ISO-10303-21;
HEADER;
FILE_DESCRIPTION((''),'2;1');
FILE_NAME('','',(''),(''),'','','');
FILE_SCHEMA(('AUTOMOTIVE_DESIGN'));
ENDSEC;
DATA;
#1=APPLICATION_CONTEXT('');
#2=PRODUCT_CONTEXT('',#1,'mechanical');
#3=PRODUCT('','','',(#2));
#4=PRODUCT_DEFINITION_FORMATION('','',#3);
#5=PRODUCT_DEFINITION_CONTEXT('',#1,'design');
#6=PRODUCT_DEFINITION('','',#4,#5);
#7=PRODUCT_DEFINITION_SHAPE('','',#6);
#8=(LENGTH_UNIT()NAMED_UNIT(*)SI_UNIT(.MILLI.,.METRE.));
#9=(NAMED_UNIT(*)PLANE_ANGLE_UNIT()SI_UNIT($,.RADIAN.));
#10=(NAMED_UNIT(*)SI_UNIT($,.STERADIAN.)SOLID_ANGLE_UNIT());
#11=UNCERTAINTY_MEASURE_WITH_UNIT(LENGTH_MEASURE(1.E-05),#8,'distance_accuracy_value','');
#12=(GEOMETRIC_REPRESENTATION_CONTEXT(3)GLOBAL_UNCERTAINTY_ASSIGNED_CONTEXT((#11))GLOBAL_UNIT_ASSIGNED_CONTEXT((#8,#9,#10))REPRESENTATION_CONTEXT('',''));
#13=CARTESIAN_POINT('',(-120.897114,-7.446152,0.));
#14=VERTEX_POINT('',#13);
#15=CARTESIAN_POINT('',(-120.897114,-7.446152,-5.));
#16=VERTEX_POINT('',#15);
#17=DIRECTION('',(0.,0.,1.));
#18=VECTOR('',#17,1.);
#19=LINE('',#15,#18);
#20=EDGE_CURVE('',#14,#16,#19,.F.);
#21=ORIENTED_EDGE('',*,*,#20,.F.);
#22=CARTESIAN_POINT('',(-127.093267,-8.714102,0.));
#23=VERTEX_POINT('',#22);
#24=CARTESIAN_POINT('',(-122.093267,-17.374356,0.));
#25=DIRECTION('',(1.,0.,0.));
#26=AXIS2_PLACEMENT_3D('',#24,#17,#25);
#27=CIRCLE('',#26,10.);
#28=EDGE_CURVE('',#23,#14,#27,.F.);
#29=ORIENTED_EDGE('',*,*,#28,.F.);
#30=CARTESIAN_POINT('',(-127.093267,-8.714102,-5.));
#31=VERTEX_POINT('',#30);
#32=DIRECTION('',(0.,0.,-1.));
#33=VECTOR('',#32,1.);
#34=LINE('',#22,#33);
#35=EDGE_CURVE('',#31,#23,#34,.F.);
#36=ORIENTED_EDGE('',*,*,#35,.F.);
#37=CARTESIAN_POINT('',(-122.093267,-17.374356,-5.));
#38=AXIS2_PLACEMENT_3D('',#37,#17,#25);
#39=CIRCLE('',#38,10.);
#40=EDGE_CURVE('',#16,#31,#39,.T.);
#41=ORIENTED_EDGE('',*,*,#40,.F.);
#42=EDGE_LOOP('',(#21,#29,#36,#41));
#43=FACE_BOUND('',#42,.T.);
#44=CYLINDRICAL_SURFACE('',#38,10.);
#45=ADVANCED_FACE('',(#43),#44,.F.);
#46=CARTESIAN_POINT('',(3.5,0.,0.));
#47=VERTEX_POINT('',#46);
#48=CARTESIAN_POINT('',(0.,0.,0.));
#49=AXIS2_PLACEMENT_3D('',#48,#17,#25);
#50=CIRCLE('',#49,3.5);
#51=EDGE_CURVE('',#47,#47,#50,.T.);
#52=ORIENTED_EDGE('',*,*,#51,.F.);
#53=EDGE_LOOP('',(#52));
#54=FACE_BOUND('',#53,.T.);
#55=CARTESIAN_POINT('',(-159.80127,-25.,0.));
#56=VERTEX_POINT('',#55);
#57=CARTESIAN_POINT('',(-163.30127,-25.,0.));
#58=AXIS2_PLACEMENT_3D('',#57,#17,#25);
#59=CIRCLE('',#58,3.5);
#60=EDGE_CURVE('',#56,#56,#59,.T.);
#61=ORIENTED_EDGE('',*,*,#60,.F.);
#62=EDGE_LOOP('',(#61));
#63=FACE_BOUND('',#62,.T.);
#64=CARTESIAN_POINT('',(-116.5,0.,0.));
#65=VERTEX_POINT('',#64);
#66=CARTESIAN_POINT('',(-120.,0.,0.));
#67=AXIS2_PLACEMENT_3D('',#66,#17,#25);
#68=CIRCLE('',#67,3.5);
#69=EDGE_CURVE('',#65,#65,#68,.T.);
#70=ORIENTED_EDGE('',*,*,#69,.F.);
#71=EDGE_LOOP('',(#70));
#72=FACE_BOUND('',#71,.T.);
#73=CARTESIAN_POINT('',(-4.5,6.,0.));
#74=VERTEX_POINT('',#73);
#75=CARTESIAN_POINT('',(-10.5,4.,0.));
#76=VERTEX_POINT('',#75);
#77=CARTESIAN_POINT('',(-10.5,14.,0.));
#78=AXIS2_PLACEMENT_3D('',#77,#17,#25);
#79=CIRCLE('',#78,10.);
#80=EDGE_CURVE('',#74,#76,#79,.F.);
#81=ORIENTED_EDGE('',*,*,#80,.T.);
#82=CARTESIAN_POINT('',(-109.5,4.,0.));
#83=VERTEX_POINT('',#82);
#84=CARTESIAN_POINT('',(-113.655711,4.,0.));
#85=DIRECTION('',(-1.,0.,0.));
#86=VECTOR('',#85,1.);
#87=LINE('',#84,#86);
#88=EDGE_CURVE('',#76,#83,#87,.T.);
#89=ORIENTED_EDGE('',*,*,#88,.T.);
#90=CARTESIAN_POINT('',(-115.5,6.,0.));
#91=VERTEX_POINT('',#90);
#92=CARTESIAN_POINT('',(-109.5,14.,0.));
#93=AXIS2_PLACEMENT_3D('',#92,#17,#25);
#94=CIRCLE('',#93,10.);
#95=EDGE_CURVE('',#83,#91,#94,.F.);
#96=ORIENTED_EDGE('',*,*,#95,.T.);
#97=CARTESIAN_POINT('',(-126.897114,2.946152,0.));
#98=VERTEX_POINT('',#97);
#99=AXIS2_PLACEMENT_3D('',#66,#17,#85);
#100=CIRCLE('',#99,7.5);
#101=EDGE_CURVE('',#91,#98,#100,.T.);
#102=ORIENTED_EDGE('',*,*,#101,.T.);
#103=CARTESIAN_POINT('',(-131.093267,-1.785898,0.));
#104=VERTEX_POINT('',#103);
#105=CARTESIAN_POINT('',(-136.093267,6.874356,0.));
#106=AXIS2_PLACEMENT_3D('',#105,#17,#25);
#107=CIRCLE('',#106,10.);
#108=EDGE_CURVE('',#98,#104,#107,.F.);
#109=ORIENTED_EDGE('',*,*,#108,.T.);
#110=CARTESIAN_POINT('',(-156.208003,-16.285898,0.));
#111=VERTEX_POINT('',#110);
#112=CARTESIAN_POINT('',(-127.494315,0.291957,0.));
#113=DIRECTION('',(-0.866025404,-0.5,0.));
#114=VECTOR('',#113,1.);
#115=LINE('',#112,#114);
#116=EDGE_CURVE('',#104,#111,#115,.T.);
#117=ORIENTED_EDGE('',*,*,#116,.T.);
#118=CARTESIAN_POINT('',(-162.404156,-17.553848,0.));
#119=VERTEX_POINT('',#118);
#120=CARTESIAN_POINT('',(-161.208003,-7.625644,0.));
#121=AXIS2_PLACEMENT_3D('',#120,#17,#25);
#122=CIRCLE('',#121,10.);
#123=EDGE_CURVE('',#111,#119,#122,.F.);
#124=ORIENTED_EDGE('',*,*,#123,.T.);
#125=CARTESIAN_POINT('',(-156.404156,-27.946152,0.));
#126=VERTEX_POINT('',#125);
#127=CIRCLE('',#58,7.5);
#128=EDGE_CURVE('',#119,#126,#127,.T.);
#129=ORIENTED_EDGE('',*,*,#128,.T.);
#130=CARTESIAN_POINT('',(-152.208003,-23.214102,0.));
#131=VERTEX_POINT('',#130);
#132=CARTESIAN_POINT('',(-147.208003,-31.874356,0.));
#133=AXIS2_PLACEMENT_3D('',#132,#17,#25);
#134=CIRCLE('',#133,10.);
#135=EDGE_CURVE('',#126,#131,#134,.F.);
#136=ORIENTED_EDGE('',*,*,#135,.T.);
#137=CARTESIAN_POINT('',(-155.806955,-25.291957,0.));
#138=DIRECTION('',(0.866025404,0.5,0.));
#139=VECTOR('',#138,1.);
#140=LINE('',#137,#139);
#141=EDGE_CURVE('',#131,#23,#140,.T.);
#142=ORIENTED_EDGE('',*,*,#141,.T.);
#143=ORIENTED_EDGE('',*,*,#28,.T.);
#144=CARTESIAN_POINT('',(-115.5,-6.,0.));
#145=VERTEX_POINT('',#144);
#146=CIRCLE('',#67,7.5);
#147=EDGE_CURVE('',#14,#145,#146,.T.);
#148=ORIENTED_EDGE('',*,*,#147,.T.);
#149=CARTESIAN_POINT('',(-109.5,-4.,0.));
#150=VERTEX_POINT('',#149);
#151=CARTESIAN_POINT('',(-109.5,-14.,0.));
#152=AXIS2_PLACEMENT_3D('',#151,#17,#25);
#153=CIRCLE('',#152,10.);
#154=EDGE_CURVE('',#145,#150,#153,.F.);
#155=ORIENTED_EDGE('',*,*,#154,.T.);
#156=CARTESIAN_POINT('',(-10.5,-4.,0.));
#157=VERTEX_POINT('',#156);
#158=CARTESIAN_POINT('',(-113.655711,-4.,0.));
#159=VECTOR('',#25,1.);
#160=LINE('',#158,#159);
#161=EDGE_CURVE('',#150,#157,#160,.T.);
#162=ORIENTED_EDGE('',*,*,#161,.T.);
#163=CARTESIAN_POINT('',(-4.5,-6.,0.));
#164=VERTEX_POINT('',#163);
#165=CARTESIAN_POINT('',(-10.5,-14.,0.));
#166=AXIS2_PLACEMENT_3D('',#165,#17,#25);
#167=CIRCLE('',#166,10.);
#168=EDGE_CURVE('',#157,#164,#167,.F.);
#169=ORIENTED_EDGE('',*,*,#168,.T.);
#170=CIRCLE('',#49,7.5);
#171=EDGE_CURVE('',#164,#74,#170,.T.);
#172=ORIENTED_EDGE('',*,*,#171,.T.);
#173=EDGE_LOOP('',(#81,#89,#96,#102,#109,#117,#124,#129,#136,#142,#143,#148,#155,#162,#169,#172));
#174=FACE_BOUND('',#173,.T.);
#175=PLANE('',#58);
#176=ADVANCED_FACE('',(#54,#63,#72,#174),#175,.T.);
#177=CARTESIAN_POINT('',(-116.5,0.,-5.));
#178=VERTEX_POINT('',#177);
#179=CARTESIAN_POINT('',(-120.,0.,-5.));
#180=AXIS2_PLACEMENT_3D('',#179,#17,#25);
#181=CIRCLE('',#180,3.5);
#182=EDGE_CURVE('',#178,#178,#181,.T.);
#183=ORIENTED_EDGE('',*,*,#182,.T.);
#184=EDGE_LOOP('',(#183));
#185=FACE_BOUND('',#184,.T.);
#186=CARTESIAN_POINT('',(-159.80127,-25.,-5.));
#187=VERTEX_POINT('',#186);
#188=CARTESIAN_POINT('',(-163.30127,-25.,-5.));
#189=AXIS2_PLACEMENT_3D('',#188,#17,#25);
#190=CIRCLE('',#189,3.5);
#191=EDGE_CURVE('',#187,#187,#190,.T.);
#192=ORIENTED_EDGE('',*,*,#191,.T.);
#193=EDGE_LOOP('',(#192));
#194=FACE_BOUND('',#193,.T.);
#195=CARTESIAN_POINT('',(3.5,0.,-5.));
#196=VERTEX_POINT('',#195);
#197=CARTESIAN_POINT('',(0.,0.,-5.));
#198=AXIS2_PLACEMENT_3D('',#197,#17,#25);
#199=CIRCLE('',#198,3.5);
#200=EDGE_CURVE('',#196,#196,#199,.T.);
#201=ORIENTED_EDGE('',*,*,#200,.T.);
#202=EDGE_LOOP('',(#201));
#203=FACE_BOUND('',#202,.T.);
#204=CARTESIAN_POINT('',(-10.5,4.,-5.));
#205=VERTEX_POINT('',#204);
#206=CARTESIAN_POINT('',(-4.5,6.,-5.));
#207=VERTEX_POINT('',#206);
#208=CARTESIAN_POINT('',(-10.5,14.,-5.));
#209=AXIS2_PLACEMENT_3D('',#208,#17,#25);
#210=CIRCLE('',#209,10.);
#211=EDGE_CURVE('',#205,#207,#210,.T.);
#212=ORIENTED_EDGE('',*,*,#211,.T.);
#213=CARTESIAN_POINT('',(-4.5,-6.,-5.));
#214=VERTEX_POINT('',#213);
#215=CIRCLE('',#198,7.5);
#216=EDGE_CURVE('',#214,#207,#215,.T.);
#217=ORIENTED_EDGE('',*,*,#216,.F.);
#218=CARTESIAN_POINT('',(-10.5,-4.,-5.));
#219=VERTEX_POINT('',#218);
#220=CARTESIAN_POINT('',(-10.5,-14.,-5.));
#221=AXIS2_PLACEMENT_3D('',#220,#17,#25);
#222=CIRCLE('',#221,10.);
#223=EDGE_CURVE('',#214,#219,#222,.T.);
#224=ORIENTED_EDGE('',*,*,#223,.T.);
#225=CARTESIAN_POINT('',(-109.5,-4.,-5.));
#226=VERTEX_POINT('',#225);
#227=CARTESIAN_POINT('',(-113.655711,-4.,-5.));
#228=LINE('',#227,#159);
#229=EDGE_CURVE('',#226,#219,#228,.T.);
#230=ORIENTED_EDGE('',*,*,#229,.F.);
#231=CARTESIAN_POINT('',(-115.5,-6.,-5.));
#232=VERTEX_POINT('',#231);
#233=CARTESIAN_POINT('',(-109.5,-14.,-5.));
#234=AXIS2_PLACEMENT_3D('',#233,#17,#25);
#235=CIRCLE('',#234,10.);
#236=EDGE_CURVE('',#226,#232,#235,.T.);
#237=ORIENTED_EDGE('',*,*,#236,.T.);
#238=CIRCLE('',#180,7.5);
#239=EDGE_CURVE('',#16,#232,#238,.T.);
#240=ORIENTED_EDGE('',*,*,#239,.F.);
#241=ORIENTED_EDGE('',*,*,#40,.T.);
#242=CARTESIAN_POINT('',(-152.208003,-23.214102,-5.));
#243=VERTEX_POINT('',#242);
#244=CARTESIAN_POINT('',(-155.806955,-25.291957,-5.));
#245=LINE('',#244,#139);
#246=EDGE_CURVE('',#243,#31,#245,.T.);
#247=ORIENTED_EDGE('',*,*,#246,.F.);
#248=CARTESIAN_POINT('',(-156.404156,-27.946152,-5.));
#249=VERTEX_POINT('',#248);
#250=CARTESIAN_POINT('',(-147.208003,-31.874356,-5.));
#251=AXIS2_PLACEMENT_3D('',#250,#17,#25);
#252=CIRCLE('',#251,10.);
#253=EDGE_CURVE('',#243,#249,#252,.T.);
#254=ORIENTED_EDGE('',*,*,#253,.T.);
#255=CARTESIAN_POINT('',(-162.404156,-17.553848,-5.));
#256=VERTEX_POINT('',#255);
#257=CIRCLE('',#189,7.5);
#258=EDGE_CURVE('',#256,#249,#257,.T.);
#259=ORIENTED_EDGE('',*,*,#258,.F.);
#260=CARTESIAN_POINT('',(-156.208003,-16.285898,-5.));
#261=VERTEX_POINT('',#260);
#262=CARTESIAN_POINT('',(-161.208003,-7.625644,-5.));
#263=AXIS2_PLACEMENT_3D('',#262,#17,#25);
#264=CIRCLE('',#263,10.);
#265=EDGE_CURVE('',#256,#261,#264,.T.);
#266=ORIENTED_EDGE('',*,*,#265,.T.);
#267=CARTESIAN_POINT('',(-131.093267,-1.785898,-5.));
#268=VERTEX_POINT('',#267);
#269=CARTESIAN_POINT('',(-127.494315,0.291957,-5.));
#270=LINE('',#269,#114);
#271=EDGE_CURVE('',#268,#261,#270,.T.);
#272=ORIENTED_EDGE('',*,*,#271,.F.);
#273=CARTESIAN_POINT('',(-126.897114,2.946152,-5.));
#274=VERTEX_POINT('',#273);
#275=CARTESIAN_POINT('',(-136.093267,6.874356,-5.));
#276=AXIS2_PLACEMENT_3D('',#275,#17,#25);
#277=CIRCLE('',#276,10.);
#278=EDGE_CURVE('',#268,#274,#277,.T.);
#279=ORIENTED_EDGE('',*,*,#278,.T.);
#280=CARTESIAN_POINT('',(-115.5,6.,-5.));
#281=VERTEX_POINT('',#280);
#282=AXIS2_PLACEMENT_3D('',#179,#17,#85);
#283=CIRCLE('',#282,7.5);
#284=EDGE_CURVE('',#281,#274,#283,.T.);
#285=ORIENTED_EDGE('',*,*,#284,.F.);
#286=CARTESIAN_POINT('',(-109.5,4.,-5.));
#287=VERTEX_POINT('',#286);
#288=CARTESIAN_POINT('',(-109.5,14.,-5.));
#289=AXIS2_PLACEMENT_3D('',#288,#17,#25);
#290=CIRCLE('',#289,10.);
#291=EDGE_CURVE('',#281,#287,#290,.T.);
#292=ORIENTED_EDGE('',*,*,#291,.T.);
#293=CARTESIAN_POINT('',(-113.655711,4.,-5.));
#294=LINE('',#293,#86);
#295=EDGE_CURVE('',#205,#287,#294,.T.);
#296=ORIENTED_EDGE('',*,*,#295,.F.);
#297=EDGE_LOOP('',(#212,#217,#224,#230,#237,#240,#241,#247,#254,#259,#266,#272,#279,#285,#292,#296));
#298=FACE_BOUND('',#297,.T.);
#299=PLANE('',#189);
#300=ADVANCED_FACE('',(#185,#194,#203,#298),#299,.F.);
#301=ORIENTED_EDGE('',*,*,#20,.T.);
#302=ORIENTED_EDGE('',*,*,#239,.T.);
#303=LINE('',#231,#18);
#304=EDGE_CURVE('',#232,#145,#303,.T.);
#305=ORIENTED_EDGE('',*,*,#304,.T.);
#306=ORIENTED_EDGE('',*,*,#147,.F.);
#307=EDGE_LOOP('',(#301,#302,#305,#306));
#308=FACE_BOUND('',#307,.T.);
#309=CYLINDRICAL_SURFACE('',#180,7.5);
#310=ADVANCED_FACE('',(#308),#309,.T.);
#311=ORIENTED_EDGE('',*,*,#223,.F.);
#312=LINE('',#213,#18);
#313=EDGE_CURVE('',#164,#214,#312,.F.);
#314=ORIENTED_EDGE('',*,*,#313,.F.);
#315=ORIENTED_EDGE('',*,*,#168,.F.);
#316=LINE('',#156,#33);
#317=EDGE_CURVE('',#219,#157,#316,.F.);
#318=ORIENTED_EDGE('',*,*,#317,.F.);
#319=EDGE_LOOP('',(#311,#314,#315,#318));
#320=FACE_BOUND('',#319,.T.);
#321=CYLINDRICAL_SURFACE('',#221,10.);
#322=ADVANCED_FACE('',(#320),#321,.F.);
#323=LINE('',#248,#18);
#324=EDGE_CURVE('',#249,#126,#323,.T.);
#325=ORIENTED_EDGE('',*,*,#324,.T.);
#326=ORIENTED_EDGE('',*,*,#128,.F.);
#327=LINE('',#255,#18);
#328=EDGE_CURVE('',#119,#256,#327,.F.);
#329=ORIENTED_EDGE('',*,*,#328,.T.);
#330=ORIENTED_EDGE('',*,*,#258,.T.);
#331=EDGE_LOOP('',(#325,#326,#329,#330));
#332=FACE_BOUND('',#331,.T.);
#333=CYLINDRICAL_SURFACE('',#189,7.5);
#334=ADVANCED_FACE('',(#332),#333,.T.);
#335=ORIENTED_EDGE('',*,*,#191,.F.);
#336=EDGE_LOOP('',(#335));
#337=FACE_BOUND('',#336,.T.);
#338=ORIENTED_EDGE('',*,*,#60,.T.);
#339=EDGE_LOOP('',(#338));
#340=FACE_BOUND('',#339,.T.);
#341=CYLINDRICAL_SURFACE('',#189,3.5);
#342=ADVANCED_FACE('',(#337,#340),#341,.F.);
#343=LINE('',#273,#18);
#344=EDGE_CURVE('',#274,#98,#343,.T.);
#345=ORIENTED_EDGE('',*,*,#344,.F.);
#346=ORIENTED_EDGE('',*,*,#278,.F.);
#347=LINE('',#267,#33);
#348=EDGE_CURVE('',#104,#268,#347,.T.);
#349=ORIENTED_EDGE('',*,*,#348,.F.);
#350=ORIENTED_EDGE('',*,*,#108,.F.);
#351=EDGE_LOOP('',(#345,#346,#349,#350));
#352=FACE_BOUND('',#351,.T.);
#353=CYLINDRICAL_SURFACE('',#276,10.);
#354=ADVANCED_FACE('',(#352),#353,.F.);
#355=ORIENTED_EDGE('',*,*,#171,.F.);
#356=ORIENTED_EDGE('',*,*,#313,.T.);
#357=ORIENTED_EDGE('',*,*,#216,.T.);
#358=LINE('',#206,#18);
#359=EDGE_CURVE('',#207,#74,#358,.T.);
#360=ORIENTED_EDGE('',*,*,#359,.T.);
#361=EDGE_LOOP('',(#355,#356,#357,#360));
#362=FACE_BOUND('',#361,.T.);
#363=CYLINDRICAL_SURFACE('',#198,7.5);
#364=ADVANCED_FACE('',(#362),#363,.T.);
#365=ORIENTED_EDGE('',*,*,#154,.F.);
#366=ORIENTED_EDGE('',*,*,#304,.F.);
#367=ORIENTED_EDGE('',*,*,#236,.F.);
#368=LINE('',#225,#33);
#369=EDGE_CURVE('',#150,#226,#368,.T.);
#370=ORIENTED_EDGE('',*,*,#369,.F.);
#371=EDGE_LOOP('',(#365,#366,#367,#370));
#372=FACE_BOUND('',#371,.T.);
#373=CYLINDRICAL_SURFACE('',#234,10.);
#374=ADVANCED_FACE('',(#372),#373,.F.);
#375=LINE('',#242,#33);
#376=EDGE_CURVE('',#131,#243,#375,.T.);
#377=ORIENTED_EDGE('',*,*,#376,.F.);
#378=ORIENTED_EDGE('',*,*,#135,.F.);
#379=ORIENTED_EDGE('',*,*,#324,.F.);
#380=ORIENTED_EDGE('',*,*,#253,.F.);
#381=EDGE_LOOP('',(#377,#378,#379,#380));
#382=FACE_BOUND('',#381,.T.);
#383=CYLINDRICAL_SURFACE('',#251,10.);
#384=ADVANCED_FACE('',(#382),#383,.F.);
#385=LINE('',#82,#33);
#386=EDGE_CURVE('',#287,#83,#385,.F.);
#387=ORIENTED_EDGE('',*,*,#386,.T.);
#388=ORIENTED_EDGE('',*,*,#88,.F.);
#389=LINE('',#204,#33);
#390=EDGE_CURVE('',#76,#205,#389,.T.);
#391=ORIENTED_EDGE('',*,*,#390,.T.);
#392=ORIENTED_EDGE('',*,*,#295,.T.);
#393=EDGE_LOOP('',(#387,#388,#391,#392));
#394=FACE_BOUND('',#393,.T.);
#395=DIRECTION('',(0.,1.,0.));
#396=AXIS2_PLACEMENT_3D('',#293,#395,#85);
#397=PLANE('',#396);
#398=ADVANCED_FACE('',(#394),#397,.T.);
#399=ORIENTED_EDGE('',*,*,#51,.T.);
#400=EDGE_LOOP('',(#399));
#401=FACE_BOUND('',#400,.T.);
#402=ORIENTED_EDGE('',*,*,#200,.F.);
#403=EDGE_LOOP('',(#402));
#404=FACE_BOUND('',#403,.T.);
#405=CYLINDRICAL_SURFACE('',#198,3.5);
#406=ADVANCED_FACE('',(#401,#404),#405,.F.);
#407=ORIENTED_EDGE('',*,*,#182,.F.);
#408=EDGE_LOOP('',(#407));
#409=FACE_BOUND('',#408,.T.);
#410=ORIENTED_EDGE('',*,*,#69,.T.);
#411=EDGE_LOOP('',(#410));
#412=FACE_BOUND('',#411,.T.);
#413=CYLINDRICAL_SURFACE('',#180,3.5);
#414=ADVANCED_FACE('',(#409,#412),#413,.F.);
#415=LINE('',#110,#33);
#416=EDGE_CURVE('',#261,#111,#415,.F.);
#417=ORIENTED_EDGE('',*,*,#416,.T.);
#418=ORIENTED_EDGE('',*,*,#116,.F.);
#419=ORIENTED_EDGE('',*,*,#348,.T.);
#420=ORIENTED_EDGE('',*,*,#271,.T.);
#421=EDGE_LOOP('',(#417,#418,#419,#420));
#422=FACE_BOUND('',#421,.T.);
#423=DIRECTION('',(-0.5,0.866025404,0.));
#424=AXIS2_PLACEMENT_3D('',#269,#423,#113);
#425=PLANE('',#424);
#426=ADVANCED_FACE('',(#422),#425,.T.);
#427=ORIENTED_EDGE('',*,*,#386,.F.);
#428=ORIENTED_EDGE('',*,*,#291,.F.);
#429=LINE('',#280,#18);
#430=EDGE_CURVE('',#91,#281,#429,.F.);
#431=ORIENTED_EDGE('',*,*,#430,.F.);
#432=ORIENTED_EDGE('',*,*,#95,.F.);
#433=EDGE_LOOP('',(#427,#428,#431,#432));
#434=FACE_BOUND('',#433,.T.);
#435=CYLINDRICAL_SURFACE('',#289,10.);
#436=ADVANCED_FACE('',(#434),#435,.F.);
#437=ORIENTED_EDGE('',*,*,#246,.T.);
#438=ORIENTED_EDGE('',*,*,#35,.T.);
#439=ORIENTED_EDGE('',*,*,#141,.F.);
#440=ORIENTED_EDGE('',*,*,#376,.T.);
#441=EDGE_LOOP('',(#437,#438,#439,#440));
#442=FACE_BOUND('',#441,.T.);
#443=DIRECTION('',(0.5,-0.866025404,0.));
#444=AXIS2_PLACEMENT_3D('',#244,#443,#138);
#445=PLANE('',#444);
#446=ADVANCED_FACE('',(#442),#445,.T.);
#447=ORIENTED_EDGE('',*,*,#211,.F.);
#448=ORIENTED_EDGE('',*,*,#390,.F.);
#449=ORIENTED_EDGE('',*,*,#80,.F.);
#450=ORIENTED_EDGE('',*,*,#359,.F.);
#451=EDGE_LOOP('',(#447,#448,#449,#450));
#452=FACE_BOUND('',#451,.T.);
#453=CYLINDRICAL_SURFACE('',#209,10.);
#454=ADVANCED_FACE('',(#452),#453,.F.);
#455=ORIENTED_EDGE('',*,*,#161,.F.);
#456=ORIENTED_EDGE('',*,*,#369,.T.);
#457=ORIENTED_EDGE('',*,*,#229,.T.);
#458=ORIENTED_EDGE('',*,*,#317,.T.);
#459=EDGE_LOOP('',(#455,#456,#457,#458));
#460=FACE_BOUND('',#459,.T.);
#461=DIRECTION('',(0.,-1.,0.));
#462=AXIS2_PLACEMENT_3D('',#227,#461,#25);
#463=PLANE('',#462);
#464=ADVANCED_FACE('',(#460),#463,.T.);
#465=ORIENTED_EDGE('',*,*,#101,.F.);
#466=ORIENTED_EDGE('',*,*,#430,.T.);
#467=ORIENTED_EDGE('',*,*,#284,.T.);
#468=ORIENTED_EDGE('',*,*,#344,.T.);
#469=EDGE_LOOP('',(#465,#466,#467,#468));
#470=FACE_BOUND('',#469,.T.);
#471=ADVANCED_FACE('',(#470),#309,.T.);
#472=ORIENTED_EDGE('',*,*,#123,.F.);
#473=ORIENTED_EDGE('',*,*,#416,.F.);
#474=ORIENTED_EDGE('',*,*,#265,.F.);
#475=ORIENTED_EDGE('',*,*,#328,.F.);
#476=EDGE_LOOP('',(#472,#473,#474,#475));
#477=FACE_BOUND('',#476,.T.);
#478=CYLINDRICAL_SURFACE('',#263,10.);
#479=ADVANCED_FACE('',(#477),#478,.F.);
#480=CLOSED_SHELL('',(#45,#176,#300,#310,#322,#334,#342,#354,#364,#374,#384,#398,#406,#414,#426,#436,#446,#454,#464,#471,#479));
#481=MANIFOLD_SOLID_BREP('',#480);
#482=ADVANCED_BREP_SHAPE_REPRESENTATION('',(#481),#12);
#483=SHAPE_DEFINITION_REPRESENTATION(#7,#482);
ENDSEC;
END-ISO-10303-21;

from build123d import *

# Parameters (mm, degrees)
SKETCH1_R          = 3.5
BASE_FLANGE1_DEPTH = 5
FILLET1_R          = 10


# Sheet-metal steps are written as plain solids
with BuildPart() as part:
    # Sketch1 → Base-Flange1 (new body)
    with BuildSketch(Plane.XY):
        with BuildLine():
            Line((-155.806954945, -25.29195723), (-123.494315244, -6.636246))
            ThreePointArc((-123.494315244, -6.636246), (-118.058857162, -7.244443697), (-113.65571123, -4))
            Line((-113.65571123, -4), (-6.34428877, -4))
            ThreePointArc((-6.34428877, -4), (7.5, 0), (-6.34428877, 4))
            Line((-6.34428877, 4), (-113.65571123, 4))
            ThreePointArc((-113.65571123, 4), (-121.941142838, 7.244443697), (-127.494315244, 0.29195723))
            Line((-127.494315244, 0.29195723), (-159.806954945, -18.363754))
            ThreePointArc((-159.806954945, -18.363754), (-169.796460718, -28.75), (-155.806954945, -25.29195723))
        make_face()
        Circle(SKETCH1_R, mode=Mode.SUBTRACT)
        with Locations((-120, 0)):
            Circle(SKETCH1_R, mode=Mode.SUBTRACT)
        with Locations((-163.301270189, -25)):
            Circle(SKETCH1_R, mode=Mode.SUBTRACT)
    extrude(amount=-BASE_FLANGE1_DEPTH)

    # Fillet1
    fillet1_edges = [part.edges().sort_by_distance(p)[0] for p in [
        (-159.806954945, -18.363754, -2.5),
        (-127.494315244, 0.29195723, -2.5),
        (-113.65571123, 4, -2.5),
        (-6.34428877, 4, -2.5),
        (-6.34428877, -4, -2.5),
        (-113.65571123, -4, -2.5),
        (-123.494315244, -6.636246, -2.5),
        (-155.806954945, -25.29195723, -2.5),
    ]]
    fillet(fillet1_edges, radius=FILLET1_R)


solid = part.part
